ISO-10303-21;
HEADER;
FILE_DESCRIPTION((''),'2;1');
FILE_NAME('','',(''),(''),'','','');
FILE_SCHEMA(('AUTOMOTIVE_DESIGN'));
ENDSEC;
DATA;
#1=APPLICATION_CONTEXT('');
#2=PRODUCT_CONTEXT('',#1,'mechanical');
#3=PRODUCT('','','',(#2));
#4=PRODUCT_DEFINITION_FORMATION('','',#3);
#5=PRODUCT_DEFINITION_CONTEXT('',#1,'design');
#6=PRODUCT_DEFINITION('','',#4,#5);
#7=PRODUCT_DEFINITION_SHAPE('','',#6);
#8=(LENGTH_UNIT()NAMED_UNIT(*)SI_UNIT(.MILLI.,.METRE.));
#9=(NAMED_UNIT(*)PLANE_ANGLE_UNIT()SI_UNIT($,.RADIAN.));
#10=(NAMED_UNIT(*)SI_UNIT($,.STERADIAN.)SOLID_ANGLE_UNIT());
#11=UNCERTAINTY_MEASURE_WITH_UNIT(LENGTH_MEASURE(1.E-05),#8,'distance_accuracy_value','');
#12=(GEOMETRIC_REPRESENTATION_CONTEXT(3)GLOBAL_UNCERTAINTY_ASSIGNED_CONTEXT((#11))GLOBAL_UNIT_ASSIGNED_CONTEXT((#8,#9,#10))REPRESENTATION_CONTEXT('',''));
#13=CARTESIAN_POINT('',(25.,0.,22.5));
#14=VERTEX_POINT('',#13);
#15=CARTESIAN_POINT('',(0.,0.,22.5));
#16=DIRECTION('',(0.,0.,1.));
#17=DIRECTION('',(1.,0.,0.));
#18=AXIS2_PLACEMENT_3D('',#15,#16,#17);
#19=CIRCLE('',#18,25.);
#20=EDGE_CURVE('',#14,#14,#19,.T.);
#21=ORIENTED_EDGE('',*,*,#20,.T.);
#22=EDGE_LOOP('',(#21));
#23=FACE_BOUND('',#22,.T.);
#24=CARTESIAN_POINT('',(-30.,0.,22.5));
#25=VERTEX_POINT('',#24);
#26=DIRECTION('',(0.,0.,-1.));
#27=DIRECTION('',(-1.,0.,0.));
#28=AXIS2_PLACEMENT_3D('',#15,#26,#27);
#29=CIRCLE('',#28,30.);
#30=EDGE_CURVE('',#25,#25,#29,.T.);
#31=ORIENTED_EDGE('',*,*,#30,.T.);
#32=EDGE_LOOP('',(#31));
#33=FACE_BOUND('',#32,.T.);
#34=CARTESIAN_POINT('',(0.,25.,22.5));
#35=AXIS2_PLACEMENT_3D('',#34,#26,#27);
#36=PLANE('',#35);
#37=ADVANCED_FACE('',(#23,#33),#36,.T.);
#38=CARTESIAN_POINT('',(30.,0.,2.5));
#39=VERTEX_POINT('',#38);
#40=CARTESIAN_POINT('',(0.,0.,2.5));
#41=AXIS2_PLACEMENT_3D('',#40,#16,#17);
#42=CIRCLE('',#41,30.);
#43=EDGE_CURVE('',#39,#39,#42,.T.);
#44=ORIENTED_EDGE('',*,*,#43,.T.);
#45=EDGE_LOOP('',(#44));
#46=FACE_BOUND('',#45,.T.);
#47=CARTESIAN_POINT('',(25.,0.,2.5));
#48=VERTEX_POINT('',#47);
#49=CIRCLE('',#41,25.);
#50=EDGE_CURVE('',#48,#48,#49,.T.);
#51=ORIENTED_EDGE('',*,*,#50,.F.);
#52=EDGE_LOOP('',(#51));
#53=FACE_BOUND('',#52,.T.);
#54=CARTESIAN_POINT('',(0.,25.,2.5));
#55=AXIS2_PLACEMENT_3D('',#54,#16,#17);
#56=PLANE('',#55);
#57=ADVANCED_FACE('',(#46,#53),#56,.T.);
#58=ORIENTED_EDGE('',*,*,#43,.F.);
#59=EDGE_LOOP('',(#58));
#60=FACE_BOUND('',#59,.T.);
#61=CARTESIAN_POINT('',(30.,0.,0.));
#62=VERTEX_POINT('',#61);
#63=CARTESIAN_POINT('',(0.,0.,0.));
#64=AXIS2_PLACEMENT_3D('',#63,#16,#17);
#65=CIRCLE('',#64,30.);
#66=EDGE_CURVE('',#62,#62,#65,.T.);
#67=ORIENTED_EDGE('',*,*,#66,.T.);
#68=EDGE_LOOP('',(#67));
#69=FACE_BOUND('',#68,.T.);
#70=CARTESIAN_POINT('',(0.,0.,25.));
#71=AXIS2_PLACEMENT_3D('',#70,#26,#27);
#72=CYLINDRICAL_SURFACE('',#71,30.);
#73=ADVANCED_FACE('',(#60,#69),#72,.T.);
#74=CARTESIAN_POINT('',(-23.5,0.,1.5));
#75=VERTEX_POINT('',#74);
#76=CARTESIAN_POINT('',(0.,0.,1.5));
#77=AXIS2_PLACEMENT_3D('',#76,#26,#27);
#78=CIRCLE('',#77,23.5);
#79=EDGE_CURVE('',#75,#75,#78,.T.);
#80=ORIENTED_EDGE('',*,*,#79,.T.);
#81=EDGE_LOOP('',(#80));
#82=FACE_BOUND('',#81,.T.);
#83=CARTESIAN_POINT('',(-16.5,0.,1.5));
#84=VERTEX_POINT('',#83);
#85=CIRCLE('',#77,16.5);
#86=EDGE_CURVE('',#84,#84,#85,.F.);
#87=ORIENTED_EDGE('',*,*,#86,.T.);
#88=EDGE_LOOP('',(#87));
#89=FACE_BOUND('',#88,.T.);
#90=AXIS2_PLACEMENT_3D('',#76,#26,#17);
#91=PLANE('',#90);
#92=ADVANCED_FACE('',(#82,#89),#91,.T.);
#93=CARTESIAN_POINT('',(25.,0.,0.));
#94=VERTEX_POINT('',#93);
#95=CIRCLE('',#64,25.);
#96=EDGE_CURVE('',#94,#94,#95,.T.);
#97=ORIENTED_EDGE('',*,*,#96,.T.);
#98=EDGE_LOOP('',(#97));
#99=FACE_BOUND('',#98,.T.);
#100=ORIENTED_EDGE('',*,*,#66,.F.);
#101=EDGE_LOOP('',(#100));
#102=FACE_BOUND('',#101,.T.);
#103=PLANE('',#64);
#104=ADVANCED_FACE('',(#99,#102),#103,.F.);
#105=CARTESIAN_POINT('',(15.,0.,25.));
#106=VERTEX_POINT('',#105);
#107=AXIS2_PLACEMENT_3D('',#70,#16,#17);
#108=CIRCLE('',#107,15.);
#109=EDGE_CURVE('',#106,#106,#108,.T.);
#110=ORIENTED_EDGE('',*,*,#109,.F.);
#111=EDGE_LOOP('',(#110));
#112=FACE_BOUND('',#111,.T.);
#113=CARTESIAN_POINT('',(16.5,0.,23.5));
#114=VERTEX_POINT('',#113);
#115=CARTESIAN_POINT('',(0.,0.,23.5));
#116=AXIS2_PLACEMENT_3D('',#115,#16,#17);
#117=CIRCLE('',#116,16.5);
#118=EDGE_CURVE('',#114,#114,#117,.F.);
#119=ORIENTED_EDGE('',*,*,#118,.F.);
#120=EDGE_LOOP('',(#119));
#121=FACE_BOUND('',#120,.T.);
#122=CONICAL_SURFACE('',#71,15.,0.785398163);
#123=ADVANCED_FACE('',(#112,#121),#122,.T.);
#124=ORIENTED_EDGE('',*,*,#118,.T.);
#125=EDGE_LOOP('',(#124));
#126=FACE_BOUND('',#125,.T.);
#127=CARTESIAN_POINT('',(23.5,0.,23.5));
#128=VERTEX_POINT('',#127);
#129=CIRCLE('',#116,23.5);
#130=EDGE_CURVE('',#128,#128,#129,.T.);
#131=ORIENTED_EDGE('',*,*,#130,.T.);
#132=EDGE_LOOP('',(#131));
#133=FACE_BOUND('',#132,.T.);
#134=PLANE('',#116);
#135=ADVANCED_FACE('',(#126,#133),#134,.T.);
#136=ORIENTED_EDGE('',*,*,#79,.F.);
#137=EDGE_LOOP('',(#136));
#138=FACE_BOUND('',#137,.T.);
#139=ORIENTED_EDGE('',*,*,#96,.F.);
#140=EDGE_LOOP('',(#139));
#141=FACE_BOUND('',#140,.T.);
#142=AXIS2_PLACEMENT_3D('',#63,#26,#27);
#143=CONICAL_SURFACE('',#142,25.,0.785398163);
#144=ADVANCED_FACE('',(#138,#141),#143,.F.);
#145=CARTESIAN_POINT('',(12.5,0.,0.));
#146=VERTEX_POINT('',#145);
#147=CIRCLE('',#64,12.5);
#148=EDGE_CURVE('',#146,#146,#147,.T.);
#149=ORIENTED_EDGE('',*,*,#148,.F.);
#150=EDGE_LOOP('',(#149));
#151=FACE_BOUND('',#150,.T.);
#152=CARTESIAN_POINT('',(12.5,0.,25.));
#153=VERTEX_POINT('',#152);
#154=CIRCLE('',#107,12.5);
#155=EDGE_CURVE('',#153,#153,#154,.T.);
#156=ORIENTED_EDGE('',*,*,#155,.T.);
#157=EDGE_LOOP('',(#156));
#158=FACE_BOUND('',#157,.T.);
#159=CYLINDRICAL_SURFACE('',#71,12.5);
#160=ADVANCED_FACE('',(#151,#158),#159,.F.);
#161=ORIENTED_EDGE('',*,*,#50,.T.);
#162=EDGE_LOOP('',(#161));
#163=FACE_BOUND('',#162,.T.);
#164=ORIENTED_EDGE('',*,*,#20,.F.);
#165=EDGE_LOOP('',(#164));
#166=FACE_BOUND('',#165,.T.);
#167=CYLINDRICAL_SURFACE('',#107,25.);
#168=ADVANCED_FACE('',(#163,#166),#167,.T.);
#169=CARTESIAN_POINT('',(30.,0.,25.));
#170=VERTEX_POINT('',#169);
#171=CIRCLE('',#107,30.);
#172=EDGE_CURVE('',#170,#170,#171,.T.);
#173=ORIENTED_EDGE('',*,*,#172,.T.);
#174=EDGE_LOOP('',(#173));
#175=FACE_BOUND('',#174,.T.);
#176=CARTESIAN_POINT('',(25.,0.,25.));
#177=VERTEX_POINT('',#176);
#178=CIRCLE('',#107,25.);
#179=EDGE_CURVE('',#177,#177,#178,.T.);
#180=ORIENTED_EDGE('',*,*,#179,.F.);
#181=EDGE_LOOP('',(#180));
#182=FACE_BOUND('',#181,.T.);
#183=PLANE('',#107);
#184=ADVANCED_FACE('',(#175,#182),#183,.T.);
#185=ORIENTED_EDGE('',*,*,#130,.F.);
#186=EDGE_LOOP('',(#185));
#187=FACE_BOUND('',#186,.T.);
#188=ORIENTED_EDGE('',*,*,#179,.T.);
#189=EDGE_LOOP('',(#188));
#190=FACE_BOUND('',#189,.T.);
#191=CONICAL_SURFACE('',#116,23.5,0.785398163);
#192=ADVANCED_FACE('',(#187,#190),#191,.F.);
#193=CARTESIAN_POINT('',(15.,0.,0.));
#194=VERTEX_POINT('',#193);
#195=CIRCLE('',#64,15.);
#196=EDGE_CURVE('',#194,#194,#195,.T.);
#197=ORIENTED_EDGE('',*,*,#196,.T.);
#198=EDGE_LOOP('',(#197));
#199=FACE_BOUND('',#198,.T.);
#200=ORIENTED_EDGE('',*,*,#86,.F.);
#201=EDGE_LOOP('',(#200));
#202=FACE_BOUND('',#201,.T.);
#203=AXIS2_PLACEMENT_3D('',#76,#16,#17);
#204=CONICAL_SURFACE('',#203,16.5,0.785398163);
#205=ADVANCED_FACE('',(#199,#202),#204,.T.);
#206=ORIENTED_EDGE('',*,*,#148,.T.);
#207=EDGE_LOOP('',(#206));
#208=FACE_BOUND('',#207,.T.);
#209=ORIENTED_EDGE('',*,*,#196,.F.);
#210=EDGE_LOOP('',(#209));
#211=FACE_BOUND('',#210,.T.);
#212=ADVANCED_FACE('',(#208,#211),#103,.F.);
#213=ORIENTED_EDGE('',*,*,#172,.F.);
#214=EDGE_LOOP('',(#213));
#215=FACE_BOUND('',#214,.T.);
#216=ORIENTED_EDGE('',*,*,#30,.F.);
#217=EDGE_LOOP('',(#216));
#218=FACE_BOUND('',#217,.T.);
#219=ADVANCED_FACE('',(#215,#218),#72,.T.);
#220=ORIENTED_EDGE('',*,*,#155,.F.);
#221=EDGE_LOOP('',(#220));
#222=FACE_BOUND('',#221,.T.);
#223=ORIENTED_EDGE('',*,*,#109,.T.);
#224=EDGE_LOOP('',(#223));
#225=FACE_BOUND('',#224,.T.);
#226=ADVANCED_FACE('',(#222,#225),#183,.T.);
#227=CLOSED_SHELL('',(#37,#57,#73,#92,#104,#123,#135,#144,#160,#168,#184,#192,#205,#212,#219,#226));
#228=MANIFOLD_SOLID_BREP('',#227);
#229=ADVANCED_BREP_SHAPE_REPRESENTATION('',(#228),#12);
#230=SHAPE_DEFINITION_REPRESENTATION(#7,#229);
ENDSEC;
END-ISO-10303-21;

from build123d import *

# Parameters (mm, degrees)
CROQUIS1_R                 = 30
CROQUIS1_R_2               = 12.5
SALIENTE_EXTRUIR1_DEPTH    = 25
CROQUIS3_W                 = 20
CROQUIS3_H                 = 10
CROQUIS4_R                 = 25
CROQUIS4_R_2               = 15
CORTAR_EXTRUIR1_DEPTH      = 1.5
CHAFL_N2_SIZE              = 1.5
CHAFL_N2_OF_SIMETR_A2_SIZE = 1.5


with BuildPart() as part:
    # Croquis1 → Saliente-Extruir1 (new body)
    with BuildSketch(Plane.XY):
        Circle(CROQUIS1_R)
        Circle(CROQUIS1_R_2, mode=Mode.SUBTRACT)
    extrude(amount=SALIENTE_EXTRUIR1_DEPTH)

    # Croquis3 → Cortar-Revolución1 (revolve, cut)
    with BuildSketch(Plane(origin=(0, 0, 0), x_dir=(0, 0, -1), z_dir=(1, 0, 0)), mode=Mode.PRIVATE) as cortar_revoluci_n1_sk:
        with Locations((-12.5, 30)):
            Rectangle(CROQUIS3_W, CROQUIS3_H)
    revolve(cortar_revoluci_n1_sk.sketch.rotate(Axis((0, 0, 25), (0, 0, -1)), 90), axis=Axis((0, 0, 25), (0, 0, -1)), mode=Mode.SUBTRACT)

    # Croquis4 → Cortar-Extruir1 (cut)
    with BuildSketch(Plane.XY.offset(25)):
        Circle(CROQUIS4_R)
        Circle(CROQUIS4_R_2, mode=Mode.SUBTRACT)
    cortar_extruir1 = extrude(amount=-CORTAR_EXTRUIR1_DEPTH, mode=Mode.SUBTRACT)

    # Chaflán2
    chafl_n2_edges = [part.edges().sort_by_distance(p)[0] for p in [
        (-25, 0, 23.5),
        (-15, 0, 23.5),
    ]]
    chamfer(chafl_n2_edges, length=CHAFL_N2_SIZE - 0.0001)  # a hair under: the kernel refuses the full size

    # Simetría2: Cortar-Extruir1 across plane
    add(cortar_extruir1.mirror(Plane.XY.offset(12.5)), mode=Mode.SUBTRACT)

    # Chaflán2 of Simetría2
    chafl_n2_of_simetr_a2_edges = [part.edges().sort_by_distance(p)[0] for p in [
        (-25, 0, 1.5),
        (-15, 0, 1.5),
    ]]
    chamfer(chafl_n2_of_simetr_a2_edges, length=CHAFL_N2_OF_SIMETR_A2_SIZE - 0.0001)  # a hair under: the kernel refuses the full size


solid = part.part
